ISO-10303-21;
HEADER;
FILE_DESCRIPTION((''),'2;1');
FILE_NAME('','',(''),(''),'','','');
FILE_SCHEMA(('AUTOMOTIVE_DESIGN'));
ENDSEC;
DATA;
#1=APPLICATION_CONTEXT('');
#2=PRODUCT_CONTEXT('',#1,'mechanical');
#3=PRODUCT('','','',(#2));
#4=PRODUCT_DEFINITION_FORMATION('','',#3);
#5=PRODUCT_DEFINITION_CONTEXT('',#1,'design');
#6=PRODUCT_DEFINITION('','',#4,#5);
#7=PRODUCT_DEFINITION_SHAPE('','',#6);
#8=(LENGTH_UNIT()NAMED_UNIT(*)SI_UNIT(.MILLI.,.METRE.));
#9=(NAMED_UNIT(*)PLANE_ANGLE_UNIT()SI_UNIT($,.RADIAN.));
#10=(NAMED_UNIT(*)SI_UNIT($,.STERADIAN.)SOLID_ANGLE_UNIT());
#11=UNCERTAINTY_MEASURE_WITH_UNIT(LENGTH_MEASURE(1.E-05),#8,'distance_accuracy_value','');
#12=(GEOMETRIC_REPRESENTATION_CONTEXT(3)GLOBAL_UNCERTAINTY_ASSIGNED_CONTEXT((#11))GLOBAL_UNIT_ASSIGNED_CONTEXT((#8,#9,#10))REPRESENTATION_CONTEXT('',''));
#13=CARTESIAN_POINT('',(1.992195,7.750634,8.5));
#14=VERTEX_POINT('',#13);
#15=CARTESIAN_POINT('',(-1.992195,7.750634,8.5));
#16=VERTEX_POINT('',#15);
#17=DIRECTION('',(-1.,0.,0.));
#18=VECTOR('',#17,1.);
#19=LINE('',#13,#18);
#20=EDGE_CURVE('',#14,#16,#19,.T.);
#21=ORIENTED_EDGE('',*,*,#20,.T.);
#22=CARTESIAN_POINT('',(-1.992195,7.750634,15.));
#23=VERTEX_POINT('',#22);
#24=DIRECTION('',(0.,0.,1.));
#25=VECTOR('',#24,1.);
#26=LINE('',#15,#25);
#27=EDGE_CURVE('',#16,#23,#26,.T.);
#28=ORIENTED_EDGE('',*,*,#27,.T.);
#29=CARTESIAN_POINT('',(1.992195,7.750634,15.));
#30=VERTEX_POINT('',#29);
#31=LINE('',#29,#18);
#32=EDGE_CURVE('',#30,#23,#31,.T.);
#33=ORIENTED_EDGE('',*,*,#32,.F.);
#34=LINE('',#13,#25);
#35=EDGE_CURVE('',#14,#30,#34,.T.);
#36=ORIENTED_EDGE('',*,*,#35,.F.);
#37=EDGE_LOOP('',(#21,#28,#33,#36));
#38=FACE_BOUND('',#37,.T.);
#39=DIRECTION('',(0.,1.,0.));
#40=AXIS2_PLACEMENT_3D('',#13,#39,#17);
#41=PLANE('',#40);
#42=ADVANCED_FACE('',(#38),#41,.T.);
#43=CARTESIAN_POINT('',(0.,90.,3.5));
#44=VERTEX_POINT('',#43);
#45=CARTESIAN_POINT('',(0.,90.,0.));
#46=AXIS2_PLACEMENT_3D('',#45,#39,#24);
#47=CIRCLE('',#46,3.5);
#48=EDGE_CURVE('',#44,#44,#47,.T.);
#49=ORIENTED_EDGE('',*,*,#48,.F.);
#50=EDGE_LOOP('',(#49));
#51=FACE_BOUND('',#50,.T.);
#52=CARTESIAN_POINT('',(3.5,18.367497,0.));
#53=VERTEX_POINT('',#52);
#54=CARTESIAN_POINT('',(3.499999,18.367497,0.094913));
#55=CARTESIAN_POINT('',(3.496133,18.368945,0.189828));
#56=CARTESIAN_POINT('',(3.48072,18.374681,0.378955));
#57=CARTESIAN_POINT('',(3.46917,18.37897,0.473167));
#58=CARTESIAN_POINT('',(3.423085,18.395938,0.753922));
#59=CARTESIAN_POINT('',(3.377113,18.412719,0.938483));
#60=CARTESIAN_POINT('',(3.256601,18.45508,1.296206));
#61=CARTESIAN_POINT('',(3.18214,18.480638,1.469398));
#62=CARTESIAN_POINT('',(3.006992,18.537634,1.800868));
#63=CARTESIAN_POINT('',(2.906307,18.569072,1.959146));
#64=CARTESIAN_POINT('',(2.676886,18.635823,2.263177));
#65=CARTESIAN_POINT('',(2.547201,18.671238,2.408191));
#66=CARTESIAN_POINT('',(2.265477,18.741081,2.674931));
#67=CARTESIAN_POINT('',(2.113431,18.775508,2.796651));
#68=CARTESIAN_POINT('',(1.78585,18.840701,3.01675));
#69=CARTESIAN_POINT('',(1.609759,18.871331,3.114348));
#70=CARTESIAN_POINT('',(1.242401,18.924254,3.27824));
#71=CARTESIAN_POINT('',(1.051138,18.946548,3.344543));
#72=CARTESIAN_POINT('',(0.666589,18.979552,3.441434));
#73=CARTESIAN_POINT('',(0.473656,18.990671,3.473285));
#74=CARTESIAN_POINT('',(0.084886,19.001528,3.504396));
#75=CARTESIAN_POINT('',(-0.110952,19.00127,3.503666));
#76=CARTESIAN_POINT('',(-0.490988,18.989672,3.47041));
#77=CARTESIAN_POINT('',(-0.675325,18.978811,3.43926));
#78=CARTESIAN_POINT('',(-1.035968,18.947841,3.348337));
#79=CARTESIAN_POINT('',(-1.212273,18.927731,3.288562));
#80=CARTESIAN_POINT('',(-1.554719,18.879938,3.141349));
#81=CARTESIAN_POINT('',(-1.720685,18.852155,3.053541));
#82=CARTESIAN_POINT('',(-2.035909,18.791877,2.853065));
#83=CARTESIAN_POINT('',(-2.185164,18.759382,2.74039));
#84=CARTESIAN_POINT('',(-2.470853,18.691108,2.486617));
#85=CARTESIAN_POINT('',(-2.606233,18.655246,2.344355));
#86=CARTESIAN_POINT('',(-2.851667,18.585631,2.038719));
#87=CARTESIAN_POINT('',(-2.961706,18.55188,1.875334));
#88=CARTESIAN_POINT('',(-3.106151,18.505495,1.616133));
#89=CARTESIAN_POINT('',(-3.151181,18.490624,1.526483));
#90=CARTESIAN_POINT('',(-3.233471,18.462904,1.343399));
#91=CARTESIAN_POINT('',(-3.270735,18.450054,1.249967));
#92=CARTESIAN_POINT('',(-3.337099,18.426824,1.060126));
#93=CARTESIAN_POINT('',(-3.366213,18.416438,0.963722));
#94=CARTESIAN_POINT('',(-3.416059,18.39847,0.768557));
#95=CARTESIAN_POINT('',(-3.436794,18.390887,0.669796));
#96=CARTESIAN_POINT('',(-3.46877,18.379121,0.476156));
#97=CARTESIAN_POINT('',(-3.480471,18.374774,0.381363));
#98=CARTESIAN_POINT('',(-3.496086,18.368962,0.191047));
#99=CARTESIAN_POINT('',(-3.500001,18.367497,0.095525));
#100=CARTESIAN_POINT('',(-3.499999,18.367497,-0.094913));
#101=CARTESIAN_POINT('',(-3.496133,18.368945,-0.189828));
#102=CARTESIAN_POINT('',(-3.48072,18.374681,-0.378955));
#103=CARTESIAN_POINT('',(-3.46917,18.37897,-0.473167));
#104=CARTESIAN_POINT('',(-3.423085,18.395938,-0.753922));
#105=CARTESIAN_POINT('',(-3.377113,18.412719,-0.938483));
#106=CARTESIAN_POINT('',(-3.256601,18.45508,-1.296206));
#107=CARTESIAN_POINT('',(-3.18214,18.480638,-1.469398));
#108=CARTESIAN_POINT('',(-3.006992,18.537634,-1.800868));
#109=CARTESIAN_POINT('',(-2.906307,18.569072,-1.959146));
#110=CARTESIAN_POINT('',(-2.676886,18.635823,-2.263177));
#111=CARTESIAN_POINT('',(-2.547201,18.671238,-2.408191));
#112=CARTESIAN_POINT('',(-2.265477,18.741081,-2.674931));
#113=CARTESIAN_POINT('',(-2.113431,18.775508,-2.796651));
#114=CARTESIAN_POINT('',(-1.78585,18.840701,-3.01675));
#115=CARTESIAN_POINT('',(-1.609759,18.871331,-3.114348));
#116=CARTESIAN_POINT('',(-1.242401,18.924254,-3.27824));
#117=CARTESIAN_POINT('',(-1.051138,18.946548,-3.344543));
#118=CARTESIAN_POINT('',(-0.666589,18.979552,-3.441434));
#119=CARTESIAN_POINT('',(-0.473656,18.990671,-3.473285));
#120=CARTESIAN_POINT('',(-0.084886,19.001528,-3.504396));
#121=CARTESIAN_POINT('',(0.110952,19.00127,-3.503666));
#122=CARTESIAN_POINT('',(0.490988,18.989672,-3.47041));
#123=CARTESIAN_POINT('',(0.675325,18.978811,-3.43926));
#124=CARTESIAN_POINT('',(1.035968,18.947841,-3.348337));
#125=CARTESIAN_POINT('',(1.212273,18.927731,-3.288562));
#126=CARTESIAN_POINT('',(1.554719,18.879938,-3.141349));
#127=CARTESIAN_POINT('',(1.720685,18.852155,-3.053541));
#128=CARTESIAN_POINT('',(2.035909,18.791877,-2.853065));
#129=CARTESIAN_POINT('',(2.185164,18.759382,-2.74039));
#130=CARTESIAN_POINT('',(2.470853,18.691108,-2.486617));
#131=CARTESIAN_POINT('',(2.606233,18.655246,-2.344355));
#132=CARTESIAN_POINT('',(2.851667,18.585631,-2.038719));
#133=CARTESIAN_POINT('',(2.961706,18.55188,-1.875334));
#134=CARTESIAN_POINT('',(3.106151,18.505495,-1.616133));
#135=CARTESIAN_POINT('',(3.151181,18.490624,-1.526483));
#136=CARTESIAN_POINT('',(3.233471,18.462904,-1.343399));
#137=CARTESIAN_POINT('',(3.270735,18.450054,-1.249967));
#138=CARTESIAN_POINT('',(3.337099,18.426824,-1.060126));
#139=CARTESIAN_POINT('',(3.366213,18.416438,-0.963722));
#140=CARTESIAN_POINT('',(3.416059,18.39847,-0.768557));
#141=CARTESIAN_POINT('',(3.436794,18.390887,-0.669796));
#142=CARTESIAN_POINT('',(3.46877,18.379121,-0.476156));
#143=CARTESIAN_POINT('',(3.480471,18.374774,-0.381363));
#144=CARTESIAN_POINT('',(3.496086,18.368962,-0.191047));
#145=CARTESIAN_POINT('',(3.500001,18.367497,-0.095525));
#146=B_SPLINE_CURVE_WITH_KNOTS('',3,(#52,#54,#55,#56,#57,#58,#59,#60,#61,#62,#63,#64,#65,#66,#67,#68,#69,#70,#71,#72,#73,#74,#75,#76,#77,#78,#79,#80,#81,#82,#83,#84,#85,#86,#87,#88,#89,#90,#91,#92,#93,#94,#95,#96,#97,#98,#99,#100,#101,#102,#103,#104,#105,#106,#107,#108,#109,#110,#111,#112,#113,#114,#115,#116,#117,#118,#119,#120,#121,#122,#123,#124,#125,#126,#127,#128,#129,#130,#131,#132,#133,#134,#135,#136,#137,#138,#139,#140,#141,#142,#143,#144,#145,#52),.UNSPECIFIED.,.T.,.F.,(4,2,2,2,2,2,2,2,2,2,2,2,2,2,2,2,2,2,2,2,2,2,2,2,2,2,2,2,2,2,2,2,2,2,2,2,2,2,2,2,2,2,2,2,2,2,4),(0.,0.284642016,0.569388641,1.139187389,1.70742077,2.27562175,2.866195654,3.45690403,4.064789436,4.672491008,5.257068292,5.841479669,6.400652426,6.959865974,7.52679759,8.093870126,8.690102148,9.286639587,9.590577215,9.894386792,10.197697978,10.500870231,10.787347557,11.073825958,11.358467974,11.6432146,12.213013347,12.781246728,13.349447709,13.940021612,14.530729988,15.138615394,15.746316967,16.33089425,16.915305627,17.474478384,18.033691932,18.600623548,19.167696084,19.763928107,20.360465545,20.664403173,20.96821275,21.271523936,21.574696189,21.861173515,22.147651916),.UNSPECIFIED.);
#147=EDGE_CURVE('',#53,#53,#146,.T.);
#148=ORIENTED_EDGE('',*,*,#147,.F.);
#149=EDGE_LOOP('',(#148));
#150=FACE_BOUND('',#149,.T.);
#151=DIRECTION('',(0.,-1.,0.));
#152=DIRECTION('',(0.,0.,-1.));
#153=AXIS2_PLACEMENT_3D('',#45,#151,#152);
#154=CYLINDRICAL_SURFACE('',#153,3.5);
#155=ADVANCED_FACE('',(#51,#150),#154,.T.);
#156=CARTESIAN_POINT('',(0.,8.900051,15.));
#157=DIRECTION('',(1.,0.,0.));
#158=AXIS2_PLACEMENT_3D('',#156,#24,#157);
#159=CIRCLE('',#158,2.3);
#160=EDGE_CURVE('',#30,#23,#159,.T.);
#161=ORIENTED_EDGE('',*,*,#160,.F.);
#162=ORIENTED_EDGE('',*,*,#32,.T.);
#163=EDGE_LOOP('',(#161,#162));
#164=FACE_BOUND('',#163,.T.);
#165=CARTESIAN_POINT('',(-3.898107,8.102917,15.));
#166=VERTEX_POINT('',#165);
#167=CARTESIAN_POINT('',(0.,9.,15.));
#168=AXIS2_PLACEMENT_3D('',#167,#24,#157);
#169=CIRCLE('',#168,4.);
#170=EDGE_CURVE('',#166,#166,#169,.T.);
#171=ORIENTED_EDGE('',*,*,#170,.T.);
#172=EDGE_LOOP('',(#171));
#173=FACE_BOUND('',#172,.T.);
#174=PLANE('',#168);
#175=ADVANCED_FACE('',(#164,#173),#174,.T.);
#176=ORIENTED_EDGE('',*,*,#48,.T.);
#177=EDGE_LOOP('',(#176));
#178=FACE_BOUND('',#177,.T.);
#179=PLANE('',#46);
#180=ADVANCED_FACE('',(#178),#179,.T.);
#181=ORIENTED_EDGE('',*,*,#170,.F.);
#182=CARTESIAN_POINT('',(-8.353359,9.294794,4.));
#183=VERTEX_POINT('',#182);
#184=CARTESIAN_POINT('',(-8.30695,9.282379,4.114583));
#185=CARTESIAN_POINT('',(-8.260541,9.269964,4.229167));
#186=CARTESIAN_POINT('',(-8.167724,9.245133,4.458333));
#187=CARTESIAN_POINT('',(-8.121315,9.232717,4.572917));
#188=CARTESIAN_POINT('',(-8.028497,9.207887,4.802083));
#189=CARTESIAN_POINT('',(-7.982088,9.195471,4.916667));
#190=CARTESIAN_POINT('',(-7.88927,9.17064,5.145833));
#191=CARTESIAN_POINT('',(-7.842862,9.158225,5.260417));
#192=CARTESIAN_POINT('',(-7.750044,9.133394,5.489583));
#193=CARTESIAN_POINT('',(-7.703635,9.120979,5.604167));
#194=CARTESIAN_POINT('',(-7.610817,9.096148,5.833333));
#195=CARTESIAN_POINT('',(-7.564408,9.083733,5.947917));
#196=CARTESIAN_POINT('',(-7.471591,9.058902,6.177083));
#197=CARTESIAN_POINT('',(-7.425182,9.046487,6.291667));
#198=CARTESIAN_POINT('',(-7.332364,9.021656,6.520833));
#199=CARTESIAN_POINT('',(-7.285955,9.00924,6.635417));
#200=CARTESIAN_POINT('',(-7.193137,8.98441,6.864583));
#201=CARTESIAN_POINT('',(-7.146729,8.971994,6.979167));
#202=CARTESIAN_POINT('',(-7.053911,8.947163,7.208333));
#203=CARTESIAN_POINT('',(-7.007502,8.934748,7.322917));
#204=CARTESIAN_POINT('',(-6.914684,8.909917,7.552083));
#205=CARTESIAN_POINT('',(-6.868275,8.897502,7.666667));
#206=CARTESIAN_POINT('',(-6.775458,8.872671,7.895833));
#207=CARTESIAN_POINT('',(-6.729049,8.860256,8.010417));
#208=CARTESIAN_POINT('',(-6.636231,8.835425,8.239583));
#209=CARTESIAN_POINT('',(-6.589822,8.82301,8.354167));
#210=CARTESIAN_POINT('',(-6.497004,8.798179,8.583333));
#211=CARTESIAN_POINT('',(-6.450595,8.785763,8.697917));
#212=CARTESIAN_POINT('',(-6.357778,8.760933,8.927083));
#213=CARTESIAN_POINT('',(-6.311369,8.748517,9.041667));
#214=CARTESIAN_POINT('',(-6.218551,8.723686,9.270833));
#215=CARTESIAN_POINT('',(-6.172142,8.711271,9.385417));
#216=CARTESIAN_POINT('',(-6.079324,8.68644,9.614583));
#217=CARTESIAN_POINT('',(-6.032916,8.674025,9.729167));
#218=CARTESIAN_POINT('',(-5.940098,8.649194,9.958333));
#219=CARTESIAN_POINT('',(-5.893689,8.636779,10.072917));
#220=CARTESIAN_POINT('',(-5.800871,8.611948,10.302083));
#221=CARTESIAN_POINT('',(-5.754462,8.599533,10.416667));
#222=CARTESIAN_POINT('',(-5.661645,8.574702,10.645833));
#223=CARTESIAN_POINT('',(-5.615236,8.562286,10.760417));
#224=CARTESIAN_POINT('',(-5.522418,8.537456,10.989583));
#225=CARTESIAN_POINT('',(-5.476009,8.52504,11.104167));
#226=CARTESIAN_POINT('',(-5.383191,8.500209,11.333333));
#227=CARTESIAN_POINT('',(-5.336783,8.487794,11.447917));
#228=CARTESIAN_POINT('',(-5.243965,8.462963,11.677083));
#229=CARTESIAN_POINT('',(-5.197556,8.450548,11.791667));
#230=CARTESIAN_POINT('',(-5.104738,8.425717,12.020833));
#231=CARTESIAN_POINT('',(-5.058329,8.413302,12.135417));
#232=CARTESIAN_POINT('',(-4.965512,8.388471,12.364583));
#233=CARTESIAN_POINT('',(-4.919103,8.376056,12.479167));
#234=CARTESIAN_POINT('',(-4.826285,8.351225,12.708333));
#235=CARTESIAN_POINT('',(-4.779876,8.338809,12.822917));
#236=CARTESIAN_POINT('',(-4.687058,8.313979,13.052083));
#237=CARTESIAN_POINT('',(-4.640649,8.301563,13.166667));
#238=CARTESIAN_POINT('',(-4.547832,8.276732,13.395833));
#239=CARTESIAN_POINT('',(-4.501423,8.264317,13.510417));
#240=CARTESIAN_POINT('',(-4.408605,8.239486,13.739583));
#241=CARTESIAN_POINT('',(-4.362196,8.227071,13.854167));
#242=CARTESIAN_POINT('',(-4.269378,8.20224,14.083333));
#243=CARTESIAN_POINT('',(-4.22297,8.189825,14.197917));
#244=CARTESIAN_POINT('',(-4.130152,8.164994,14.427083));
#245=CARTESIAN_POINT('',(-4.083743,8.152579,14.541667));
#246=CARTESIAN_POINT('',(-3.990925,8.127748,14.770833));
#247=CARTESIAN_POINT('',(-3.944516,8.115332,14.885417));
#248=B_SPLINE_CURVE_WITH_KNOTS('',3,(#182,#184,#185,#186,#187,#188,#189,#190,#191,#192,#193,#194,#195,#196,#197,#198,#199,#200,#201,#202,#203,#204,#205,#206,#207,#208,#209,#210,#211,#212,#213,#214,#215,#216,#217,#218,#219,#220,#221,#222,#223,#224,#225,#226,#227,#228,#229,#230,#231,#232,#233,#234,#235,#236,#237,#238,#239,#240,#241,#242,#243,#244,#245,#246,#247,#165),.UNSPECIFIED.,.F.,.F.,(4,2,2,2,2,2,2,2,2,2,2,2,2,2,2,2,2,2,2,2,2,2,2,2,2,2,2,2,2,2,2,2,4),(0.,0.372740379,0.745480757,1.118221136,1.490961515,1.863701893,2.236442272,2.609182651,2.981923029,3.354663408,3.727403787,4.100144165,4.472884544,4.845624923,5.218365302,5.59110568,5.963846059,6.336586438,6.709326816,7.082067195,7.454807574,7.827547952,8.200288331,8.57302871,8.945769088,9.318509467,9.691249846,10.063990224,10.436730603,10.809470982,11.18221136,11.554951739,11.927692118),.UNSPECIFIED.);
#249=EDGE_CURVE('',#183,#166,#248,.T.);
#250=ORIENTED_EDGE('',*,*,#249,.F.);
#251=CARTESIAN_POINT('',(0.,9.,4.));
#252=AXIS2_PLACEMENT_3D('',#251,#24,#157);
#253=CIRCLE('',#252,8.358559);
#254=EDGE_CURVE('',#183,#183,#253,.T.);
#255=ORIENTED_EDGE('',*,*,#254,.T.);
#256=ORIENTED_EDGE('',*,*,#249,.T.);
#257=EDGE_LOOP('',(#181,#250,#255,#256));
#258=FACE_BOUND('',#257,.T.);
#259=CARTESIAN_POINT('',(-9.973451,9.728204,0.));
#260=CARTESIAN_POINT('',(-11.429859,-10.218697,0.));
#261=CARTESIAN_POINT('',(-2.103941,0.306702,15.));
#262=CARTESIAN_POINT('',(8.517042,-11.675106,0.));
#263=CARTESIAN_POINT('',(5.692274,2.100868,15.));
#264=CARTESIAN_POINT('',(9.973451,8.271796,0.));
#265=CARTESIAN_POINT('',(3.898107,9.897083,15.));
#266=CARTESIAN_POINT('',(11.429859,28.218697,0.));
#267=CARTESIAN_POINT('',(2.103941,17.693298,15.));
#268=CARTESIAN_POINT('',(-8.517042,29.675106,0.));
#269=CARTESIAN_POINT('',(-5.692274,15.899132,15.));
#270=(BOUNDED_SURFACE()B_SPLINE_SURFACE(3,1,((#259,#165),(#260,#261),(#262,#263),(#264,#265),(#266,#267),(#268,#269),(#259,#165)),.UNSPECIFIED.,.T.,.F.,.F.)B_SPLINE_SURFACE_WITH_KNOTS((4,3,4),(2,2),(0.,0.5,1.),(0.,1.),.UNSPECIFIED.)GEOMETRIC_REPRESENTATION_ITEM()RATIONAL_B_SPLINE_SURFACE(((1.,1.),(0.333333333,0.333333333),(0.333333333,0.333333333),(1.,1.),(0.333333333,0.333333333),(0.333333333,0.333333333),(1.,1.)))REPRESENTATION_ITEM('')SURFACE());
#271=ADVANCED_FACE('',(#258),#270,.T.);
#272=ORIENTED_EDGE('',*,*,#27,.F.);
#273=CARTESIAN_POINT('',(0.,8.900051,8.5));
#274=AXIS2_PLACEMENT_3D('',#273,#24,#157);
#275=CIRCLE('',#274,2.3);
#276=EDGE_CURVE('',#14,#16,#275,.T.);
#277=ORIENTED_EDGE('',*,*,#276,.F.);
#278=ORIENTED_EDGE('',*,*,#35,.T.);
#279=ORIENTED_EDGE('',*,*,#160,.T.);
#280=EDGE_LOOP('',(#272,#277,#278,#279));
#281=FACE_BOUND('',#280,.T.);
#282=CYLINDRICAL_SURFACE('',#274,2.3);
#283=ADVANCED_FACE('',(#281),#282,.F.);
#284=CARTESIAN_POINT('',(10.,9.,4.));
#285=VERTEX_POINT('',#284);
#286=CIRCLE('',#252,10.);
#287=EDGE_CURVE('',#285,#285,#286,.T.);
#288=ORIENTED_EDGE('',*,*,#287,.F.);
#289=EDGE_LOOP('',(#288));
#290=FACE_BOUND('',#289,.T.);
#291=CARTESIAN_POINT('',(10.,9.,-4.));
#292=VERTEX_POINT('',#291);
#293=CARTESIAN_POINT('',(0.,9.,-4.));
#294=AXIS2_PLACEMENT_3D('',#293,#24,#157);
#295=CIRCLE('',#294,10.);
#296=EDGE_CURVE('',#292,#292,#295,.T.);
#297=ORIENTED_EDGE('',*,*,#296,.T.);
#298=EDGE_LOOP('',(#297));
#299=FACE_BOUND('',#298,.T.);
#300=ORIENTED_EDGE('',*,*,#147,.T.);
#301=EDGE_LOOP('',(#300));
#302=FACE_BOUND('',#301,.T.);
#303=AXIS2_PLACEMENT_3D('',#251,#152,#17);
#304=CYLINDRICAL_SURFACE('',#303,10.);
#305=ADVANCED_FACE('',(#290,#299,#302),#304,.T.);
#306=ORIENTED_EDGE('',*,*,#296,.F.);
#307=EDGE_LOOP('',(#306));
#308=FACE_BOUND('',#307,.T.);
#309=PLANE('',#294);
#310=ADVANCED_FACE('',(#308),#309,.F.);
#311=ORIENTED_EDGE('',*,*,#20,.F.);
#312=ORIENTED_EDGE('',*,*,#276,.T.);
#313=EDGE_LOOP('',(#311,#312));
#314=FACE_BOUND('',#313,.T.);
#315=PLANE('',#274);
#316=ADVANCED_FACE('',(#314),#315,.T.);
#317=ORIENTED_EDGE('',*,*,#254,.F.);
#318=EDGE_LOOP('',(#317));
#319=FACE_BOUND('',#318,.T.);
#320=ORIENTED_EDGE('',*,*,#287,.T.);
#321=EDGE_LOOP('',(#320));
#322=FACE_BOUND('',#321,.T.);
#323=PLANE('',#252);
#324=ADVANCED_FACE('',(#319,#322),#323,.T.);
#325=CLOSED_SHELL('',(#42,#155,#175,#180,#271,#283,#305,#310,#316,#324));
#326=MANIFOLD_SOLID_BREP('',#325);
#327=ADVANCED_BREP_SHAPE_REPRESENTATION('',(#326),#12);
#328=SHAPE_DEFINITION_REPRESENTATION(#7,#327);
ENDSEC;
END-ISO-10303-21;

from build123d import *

# Parameters (mm, degrees)
SKETCH1_R           = 3.5
BOSS_EXTRUDE1_DEPTH = 90
SKETCH4_R           = 10
BOSS_EXTRUDE2_DEPTH = 4
BOSS_EXTRUDE3_START = -4
SKETCH4_7_R         = 10
BOSS_EXTRUDE3_DEPTH = 4
CUT_EXTRUDE3_DEPTH  = 6.5


with BuildPart() as part:
    # Sketch1 → Boss-Extrude1 (new body)
    with BuildSketch(Plane(origin=(0, 0, 0), x_dir=(1, 0, 0), z_dir=(0, 1, 0))):
        with Locations(Location((0, 0, 0), (0, 0, 90))):
            Circle(SKETCH1_R)
    extrude(amount=BOSS_EXTRUDE1_DEPTH)

    # Sketch4 → Boss-Extrude2 (add)
    with BuildSketch(Plane.XY):
        with Locations(Location((0, 9, 0), (0, 0, 110.487315115))):
            Circle(SKETCH4_R)
    extrude(amount=BOSS_EXTRUDE2_DEPTH)

    # Sketch4<7> → Boss-Extrude3 (add)
    with BuildSketch(Plane.XY.offset(BOSS_EXTRUDE3_START)):
        with Locations((0, 9)):
            Circle(SKETCH4_7_R)
    extrude(amount=BOSS_EXTRUDE3_DEPTH)

    # Loft2: read off the stored shape, not the designer's step
    # Loft2: loft between two sections, ruled curve by curve
    loft2_from = [
        Edge.make_bspline([(-9.973450677, 9.728204366, 0), (-11.429859409, -10.218696987, 0), (8.517041945, -11.67510572, 0), (9.973450677, 8.271795634, 0), (11.429859409, 28.218696987, 0), (-8.517041945, 29.67510572, 0), (-9.973450677, 9.728204366, 0)], [0, 0, 0, 0, 0.5, 0.5, 0.5, 1, 1, 1, 1], 3, [1, 0.333333333, 0.333333333, 1, 0.333333333, 0.333333333, 1]),
    ]
    loft2_to = [
        Edge.make_bspline([(-3.898107491, 8.102916956, 15), (-2.103941404, 0.306701974, 15), (5.692273579, 2.100868062, 15), (3.898107491, 9.897083044, 15), (2.103941404, 17.693298026, 15), (-5.692273579, 15.899131938, 15), (-3.898107491, 8.102916956, 15)], [0, 0, 0, 0, 0.5, 0.5, 0.5, 1, 1, 1, 1], 3, [1, 0.333333333, 0.333333333, 1, 0.333333333, 0.333333333, 1]),
    ]
    loft2 = Solid(Shell([*[Face.make_surface_from_curves(loft2_from[k], loft2_to[k]) for k in range(1)], Face(Wire(loft2_from)), Face(Wire(loft2_to))]))
    add(loft2)

    # Sketch5 → Cut-Extrude3 (cut)
    with BuildSketch(Plane.XY.offset(15)):
        with BuildLine():
            Line((1.99219482, 7.750633525), (-1.99219482, 7.750633525))
            ThreePointArc((-1.99219482, 7.750633525), (0, 11.200050682), (1.99219482, 7.750633525))
        make_face()
    extrude(amount=-CUT_EXTRUDE3_DEPTH, mode=Mode.SUBTRACT)


solid = part.part
